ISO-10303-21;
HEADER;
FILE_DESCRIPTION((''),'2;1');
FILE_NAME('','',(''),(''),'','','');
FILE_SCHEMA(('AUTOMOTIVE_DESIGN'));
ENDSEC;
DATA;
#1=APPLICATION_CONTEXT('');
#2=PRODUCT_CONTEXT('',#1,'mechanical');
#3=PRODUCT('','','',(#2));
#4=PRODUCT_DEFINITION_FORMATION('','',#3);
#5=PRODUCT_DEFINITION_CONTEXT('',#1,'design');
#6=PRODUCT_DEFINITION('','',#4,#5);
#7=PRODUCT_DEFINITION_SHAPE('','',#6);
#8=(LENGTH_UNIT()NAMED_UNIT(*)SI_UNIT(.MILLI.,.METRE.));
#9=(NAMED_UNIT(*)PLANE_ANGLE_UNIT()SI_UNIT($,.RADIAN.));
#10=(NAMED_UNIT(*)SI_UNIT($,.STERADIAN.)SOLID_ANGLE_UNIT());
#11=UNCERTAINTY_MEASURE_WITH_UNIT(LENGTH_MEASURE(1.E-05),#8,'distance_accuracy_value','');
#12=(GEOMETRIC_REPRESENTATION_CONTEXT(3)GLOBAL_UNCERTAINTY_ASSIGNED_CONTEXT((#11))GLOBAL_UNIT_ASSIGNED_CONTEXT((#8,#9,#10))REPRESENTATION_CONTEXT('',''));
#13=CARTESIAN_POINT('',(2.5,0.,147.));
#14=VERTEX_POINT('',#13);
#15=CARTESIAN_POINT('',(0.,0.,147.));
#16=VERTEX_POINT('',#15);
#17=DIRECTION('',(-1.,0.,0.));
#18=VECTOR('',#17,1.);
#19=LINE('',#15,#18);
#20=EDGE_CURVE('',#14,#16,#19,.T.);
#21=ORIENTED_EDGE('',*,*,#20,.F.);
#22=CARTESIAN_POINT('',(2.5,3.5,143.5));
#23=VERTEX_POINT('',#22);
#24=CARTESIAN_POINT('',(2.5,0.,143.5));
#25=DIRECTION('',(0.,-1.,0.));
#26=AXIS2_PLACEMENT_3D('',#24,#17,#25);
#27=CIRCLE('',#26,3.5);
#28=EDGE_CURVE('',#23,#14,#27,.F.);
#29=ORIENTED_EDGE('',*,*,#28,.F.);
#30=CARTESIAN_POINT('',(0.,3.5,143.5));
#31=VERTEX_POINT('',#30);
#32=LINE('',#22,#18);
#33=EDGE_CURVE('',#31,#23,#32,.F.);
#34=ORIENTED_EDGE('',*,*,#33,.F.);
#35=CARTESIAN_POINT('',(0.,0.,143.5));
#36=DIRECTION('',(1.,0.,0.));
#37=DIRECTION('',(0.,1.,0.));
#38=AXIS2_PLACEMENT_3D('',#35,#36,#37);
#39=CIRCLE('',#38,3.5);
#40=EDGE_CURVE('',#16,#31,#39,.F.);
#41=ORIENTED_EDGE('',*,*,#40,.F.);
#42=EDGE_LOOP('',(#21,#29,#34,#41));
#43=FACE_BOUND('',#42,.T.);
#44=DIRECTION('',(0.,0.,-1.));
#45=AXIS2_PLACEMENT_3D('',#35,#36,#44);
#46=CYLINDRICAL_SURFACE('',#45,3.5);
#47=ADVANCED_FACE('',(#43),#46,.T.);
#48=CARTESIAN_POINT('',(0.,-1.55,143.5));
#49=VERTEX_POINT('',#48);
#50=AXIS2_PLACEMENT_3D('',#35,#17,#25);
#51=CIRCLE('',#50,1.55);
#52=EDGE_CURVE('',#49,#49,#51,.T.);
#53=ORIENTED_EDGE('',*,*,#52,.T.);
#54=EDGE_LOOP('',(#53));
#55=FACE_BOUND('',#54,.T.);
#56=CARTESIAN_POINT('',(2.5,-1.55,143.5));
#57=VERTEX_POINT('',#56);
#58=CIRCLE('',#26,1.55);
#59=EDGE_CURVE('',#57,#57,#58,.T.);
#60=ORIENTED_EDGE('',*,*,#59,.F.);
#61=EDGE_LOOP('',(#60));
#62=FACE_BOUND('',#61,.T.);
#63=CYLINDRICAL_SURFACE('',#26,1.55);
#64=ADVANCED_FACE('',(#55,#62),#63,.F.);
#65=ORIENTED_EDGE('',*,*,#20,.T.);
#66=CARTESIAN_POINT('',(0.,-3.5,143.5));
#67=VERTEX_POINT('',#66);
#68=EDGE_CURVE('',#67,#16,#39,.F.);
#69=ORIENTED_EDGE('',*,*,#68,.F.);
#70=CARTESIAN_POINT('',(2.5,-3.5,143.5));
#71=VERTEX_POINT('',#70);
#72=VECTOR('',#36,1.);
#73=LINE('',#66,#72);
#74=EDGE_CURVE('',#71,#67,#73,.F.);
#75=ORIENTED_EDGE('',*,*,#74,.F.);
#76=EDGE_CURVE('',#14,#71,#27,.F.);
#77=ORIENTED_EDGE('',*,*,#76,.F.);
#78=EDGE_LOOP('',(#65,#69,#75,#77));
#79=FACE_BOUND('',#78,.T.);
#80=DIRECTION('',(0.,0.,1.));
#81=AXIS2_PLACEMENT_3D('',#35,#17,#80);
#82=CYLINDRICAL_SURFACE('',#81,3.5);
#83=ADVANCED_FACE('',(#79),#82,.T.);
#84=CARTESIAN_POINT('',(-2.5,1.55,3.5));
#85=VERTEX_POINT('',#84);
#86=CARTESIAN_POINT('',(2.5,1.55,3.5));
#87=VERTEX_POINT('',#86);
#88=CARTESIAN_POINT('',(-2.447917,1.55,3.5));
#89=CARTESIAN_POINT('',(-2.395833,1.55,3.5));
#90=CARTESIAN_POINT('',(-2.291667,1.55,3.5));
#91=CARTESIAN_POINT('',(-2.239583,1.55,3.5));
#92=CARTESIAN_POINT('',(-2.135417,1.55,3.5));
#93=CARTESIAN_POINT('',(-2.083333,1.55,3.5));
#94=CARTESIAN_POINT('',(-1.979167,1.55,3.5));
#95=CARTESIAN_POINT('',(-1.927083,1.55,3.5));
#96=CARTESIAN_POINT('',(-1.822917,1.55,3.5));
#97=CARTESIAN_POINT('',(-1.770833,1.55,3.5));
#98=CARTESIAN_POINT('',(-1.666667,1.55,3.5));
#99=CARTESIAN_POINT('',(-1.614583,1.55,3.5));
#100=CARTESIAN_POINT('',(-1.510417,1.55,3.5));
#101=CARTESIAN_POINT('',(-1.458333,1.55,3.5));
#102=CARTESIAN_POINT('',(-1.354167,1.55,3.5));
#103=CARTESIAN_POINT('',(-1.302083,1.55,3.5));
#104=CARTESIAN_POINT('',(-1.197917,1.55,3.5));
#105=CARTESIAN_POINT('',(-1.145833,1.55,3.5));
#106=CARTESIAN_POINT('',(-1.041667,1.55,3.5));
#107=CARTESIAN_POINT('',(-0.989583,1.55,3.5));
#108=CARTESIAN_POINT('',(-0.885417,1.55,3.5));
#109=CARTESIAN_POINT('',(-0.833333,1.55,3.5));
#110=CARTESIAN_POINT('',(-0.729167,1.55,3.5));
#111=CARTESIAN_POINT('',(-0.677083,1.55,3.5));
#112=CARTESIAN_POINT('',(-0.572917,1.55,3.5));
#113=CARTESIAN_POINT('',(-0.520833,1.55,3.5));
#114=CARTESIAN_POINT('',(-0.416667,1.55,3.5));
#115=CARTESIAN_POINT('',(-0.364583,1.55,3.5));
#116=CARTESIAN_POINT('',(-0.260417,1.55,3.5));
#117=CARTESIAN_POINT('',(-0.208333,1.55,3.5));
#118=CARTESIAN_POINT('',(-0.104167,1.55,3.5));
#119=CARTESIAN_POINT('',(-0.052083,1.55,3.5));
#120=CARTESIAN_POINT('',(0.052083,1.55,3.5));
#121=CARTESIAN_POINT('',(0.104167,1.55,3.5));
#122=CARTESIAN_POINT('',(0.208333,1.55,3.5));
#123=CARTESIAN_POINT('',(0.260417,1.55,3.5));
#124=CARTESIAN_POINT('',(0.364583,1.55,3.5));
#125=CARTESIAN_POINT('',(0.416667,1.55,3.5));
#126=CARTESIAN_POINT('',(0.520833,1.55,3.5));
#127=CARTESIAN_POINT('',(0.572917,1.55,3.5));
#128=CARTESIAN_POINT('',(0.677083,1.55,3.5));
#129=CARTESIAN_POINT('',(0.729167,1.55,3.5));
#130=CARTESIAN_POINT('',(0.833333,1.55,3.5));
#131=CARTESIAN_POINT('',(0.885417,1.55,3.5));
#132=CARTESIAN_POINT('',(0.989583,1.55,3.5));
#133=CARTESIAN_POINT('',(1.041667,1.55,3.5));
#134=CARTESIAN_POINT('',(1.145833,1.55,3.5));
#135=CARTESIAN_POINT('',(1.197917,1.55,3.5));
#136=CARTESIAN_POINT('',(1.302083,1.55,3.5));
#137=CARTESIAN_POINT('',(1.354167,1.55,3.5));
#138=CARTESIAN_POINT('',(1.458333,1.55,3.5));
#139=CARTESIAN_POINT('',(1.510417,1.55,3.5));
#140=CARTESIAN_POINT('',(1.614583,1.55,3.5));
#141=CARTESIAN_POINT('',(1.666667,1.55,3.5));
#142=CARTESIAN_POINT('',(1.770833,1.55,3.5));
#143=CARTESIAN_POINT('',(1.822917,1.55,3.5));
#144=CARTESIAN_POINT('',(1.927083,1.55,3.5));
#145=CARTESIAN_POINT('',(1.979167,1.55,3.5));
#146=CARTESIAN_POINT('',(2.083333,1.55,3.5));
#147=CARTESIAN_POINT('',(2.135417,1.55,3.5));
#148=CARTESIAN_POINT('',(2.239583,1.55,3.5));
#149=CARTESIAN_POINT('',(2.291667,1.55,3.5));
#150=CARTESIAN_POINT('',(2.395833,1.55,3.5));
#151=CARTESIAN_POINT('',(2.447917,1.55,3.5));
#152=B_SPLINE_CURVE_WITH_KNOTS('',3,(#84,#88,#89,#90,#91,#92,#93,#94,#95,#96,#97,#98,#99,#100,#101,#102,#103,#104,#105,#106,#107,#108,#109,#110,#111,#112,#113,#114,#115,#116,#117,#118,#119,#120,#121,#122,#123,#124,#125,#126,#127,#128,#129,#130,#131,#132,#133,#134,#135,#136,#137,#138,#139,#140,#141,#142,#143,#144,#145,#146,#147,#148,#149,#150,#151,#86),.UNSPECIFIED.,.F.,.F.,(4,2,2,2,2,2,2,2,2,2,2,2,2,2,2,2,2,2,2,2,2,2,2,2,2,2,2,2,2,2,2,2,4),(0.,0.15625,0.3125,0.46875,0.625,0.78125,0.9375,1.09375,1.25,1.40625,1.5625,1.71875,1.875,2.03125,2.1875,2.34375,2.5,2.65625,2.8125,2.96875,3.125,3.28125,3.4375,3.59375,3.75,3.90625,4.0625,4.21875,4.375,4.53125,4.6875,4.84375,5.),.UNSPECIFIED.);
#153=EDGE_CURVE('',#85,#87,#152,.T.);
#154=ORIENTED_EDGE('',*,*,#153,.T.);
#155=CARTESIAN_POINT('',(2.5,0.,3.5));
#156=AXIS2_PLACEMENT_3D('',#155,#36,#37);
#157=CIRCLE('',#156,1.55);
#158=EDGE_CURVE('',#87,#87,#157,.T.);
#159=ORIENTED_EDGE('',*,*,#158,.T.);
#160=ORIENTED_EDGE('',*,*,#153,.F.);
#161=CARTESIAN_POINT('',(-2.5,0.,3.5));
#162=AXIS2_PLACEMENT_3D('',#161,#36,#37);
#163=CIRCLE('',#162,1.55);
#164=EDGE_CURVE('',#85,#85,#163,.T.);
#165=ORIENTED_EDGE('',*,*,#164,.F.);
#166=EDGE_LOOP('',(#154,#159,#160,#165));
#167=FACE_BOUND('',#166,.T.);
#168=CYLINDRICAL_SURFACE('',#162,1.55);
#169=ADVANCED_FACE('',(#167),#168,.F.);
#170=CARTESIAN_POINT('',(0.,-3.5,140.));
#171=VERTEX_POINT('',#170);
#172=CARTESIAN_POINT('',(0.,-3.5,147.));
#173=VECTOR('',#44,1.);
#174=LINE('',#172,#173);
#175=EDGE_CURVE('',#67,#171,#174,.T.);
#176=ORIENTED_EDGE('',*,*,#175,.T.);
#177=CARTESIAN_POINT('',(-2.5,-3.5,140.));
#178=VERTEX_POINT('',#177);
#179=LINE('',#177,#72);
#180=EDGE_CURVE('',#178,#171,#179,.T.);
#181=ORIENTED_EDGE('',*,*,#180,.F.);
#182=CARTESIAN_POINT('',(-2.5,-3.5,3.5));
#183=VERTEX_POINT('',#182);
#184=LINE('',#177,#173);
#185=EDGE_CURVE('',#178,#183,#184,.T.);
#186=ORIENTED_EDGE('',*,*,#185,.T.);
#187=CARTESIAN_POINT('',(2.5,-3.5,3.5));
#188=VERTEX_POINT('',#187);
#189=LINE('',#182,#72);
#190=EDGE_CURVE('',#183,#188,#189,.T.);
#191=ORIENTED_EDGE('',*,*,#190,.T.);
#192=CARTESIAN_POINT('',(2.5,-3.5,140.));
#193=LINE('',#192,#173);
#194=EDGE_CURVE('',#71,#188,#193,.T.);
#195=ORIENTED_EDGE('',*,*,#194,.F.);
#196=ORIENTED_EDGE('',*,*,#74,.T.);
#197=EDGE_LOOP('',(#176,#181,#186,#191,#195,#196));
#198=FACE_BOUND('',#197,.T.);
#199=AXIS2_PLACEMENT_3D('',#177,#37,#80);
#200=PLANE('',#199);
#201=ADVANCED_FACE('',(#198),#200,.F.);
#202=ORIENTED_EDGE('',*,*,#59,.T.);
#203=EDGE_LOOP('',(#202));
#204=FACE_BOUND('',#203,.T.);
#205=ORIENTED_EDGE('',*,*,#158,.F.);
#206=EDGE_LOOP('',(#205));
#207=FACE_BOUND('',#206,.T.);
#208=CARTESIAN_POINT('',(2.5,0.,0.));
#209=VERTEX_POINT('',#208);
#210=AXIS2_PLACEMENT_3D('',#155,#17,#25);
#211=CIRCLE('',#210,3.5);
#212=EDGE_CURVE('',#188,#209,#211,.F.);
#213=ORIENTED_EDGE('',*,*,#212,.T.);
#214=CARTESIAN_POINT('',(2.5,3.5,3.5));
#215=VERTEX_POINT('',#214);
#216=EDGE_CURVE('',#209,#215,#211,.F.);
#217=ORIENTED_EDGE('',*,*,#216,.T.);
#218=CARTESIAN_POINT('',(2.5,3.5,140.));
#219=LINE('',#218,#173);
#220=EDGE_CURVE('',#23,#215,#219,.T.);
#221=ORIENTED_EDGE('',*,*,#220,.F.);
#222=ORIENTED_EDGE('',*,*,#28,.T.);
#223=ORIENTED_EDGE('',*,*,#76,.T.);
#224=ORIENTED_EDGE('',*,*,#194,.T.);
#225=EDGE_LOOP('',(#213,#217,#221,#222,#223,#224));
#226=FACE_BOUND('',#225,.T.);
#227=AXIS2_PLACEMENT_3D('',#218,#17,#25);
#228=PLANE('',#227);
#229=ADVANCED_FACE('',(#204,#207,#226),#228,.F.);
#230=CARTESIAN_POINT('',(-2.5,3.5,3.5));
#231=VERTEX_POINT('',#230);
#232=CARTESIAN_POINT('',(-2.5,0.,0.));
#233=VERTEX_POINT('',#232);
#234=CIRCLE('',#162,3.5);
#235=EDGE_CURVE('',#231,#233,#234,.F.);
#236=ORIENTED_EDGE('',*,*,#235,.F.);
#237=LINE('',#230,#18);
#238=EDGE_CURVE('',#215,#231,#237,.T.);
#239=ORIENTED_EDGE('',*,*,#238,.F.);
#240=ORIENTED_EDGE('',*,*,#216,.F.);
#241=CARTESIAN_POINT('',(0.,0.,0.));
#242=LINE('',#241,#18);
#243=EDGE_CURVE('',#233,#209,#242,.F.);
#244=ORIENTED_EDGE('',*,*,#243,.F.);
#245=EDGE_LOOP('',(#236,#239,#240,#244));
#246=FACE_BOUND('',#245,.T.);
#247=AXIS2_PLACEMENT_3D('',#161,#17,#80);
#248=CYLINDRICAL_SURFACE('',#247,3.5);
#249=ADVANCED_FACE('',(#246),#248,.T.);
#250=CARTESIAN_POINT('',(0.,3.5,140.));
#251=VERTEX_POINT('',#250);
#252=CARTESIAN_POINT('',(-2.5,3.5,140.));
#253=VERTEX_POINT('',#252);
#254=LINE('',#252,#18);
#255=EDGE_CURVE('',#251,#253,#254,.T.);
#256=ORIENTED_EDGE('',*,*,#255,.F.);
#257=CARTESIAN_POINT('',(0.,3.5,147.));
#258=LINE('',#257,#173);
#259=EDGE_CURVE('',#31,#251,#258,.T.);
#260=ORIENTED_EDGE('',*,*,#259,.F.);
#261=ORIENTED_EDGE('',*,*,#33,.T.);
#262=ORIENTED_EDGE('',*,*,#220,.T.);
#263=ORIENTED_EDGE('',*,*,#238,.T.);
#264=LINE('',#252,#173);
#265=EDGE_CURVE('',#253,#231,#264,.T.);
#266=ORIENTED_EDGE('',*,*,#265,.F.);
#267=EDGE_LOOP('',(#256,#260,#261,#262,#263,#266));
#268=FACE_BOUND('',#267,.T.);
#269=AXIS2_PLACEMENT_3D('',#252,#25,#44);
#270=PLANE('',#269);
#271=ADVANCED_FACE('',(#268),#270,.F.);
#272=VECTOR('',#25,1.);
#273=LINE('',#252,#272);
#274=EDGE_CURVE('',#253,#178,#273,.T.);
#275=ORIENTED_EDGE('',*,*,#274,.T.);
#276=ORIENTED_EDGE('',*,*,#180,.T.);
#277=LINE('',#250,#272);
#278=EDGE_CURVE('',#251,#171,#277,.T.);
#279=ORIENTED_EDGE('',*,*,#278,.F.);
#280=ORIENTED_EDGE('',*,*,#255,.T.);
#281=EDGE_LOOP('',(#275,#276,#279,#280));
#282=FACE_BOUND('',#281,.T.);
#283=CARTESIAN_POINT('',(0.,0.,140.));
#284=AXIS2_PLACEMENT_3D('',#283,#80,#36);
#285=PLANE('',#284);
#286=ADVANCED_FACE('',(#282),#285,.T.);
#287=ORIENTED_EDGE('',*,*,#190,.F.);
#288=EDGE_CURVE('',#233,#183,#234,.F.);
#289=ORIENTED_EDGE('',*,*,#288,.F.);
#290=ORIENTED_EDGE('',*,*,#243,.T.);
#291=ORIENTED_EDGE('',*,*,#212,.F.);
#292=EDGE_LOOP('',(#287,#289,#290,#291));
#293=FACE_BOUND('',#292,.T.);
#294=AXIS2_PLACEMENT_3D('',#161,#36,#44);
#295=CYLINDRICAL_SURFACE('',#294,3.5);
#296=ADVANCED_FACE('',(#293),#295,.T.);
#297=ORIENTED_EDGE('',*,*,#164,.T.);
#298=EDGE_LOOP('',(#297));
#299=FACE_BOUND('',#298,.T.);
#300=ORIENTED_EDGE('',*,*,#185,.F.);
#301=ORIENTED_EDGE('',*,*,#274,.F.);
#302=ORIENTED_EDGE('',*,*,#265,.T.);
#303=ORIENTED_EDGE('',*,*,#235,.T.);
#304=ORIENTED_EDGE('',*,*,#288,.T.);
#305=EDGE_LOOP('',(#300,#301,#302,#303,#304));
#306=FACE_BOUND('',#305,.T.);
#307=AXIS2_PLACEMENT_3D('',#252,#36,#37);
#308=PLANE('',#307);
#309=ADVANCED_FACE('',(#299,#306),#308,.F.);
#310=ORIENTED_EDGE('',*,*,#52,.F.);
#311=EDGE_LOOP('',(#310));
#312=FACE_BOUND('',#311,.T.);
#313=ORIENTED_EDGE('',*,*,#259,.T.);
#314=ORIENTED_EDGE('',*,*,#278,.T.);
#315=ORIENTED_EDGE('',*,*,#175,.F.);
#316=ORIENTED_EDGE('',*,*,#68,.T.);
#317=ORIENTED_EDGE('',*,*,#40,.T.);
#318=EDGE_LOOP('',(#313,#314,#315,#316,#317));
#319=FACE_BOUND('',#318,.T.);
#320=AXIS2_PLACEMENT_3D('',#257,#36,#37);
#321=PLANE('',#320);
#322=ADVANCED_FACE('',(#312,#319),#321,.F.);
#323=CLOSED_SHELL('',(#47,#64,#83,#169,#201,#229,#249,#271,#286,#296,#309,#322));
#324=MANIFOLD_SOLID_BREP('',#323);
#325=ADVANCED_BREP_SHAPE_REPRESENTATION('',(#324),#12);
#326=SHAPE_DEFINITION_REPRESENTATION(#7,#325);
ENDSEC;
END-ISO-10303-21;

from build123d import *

# Parameters (mm, degrees)
SKETCH_1_W          = 5
SKETCH_1_H          = 7
EXTRUDE_2_DEPTH     = 140
FILLET_1_R          = 3.5
SKETCH_3_R          = 1.55
CUT_EXTRUDE_1_DEPTH = 141.132972565
SKETCH_4_W          = 2.5
SKETCH_4_H          = 7
EXTRUDE_3_DEPTH     = 7
FILLET_2_R          = 3.5
SKETCH_5_R          = 1.55
CUT_EXTRUDE_2_DEPTH = 148.062911708


with BuildPart() as part:
    # 草图1 → 凸台-拉伸2 (new body)
    with BuildSketch(Plane.XY):
        Rectangle(SKETCH_1_W, SKETCH_1_H)
    extrude(amount=EXTRUDE_2_DEPTH)

    # 圆角1
    fillet_1_edges = [part.edges().sort_by_distance(p)[0] for p in [
        (0, -3.5, 0),
        (0, 3.5, 0),
    ]]
    fillet(fillet_1_edges, radius=FILLET_1_R - 0.0001)  # a hair under: the kernel refuses the full size

    # 草图3 → 切除-拉伸1 (cut, through all)
    with BuildSketch(Plane(origin=(2.5, 0, 0), x_dir=(0, 0, -1), z_dir=(1, 0, 0))):
        with Locations(Location((-3.5, 0, 0), (0, 0, 90))):
            Circle(SKETCH_3_R)
    extrude(amount=-CUT_EXTRUDE_1_DEPTH, mode=Mode.SUBTRACT)

    # 草图4 → 凸台-拉伸3 (add)
    with BuildSketch(Plane.XY.offset(140)):
        with Locations((1.25, 0)):
            Rectangle(SKETCH_4_W, SKETCH_4_H)
    extrude(amount=EXTRUDE_3_DEPTH)

    # 圆角2
    fillet_2_edges = [part.edges().sort_by_distance(p)[0] for p in [
        (1.25, -3.5, 147),
        (1.25, 3.5, 147),
    ]]
    fillet(fillet_2_edges, radius=FILLET_2_R - 0.0001)  # a hair under: the kernel refuses the full size

    # 草图5 → 切除-拉伸2 (cut, through all)
    with BuildSketch(Plane.ZY):
        with Locations(Location((143.5, 0, 0), (0, 0, 270))):
            Circle(SKETCH_5_R)
    extrude(amount=-CUT_EXTRUDE_2_DEPTH, mode=Mode.SUBTRACT)


solid = part.part
